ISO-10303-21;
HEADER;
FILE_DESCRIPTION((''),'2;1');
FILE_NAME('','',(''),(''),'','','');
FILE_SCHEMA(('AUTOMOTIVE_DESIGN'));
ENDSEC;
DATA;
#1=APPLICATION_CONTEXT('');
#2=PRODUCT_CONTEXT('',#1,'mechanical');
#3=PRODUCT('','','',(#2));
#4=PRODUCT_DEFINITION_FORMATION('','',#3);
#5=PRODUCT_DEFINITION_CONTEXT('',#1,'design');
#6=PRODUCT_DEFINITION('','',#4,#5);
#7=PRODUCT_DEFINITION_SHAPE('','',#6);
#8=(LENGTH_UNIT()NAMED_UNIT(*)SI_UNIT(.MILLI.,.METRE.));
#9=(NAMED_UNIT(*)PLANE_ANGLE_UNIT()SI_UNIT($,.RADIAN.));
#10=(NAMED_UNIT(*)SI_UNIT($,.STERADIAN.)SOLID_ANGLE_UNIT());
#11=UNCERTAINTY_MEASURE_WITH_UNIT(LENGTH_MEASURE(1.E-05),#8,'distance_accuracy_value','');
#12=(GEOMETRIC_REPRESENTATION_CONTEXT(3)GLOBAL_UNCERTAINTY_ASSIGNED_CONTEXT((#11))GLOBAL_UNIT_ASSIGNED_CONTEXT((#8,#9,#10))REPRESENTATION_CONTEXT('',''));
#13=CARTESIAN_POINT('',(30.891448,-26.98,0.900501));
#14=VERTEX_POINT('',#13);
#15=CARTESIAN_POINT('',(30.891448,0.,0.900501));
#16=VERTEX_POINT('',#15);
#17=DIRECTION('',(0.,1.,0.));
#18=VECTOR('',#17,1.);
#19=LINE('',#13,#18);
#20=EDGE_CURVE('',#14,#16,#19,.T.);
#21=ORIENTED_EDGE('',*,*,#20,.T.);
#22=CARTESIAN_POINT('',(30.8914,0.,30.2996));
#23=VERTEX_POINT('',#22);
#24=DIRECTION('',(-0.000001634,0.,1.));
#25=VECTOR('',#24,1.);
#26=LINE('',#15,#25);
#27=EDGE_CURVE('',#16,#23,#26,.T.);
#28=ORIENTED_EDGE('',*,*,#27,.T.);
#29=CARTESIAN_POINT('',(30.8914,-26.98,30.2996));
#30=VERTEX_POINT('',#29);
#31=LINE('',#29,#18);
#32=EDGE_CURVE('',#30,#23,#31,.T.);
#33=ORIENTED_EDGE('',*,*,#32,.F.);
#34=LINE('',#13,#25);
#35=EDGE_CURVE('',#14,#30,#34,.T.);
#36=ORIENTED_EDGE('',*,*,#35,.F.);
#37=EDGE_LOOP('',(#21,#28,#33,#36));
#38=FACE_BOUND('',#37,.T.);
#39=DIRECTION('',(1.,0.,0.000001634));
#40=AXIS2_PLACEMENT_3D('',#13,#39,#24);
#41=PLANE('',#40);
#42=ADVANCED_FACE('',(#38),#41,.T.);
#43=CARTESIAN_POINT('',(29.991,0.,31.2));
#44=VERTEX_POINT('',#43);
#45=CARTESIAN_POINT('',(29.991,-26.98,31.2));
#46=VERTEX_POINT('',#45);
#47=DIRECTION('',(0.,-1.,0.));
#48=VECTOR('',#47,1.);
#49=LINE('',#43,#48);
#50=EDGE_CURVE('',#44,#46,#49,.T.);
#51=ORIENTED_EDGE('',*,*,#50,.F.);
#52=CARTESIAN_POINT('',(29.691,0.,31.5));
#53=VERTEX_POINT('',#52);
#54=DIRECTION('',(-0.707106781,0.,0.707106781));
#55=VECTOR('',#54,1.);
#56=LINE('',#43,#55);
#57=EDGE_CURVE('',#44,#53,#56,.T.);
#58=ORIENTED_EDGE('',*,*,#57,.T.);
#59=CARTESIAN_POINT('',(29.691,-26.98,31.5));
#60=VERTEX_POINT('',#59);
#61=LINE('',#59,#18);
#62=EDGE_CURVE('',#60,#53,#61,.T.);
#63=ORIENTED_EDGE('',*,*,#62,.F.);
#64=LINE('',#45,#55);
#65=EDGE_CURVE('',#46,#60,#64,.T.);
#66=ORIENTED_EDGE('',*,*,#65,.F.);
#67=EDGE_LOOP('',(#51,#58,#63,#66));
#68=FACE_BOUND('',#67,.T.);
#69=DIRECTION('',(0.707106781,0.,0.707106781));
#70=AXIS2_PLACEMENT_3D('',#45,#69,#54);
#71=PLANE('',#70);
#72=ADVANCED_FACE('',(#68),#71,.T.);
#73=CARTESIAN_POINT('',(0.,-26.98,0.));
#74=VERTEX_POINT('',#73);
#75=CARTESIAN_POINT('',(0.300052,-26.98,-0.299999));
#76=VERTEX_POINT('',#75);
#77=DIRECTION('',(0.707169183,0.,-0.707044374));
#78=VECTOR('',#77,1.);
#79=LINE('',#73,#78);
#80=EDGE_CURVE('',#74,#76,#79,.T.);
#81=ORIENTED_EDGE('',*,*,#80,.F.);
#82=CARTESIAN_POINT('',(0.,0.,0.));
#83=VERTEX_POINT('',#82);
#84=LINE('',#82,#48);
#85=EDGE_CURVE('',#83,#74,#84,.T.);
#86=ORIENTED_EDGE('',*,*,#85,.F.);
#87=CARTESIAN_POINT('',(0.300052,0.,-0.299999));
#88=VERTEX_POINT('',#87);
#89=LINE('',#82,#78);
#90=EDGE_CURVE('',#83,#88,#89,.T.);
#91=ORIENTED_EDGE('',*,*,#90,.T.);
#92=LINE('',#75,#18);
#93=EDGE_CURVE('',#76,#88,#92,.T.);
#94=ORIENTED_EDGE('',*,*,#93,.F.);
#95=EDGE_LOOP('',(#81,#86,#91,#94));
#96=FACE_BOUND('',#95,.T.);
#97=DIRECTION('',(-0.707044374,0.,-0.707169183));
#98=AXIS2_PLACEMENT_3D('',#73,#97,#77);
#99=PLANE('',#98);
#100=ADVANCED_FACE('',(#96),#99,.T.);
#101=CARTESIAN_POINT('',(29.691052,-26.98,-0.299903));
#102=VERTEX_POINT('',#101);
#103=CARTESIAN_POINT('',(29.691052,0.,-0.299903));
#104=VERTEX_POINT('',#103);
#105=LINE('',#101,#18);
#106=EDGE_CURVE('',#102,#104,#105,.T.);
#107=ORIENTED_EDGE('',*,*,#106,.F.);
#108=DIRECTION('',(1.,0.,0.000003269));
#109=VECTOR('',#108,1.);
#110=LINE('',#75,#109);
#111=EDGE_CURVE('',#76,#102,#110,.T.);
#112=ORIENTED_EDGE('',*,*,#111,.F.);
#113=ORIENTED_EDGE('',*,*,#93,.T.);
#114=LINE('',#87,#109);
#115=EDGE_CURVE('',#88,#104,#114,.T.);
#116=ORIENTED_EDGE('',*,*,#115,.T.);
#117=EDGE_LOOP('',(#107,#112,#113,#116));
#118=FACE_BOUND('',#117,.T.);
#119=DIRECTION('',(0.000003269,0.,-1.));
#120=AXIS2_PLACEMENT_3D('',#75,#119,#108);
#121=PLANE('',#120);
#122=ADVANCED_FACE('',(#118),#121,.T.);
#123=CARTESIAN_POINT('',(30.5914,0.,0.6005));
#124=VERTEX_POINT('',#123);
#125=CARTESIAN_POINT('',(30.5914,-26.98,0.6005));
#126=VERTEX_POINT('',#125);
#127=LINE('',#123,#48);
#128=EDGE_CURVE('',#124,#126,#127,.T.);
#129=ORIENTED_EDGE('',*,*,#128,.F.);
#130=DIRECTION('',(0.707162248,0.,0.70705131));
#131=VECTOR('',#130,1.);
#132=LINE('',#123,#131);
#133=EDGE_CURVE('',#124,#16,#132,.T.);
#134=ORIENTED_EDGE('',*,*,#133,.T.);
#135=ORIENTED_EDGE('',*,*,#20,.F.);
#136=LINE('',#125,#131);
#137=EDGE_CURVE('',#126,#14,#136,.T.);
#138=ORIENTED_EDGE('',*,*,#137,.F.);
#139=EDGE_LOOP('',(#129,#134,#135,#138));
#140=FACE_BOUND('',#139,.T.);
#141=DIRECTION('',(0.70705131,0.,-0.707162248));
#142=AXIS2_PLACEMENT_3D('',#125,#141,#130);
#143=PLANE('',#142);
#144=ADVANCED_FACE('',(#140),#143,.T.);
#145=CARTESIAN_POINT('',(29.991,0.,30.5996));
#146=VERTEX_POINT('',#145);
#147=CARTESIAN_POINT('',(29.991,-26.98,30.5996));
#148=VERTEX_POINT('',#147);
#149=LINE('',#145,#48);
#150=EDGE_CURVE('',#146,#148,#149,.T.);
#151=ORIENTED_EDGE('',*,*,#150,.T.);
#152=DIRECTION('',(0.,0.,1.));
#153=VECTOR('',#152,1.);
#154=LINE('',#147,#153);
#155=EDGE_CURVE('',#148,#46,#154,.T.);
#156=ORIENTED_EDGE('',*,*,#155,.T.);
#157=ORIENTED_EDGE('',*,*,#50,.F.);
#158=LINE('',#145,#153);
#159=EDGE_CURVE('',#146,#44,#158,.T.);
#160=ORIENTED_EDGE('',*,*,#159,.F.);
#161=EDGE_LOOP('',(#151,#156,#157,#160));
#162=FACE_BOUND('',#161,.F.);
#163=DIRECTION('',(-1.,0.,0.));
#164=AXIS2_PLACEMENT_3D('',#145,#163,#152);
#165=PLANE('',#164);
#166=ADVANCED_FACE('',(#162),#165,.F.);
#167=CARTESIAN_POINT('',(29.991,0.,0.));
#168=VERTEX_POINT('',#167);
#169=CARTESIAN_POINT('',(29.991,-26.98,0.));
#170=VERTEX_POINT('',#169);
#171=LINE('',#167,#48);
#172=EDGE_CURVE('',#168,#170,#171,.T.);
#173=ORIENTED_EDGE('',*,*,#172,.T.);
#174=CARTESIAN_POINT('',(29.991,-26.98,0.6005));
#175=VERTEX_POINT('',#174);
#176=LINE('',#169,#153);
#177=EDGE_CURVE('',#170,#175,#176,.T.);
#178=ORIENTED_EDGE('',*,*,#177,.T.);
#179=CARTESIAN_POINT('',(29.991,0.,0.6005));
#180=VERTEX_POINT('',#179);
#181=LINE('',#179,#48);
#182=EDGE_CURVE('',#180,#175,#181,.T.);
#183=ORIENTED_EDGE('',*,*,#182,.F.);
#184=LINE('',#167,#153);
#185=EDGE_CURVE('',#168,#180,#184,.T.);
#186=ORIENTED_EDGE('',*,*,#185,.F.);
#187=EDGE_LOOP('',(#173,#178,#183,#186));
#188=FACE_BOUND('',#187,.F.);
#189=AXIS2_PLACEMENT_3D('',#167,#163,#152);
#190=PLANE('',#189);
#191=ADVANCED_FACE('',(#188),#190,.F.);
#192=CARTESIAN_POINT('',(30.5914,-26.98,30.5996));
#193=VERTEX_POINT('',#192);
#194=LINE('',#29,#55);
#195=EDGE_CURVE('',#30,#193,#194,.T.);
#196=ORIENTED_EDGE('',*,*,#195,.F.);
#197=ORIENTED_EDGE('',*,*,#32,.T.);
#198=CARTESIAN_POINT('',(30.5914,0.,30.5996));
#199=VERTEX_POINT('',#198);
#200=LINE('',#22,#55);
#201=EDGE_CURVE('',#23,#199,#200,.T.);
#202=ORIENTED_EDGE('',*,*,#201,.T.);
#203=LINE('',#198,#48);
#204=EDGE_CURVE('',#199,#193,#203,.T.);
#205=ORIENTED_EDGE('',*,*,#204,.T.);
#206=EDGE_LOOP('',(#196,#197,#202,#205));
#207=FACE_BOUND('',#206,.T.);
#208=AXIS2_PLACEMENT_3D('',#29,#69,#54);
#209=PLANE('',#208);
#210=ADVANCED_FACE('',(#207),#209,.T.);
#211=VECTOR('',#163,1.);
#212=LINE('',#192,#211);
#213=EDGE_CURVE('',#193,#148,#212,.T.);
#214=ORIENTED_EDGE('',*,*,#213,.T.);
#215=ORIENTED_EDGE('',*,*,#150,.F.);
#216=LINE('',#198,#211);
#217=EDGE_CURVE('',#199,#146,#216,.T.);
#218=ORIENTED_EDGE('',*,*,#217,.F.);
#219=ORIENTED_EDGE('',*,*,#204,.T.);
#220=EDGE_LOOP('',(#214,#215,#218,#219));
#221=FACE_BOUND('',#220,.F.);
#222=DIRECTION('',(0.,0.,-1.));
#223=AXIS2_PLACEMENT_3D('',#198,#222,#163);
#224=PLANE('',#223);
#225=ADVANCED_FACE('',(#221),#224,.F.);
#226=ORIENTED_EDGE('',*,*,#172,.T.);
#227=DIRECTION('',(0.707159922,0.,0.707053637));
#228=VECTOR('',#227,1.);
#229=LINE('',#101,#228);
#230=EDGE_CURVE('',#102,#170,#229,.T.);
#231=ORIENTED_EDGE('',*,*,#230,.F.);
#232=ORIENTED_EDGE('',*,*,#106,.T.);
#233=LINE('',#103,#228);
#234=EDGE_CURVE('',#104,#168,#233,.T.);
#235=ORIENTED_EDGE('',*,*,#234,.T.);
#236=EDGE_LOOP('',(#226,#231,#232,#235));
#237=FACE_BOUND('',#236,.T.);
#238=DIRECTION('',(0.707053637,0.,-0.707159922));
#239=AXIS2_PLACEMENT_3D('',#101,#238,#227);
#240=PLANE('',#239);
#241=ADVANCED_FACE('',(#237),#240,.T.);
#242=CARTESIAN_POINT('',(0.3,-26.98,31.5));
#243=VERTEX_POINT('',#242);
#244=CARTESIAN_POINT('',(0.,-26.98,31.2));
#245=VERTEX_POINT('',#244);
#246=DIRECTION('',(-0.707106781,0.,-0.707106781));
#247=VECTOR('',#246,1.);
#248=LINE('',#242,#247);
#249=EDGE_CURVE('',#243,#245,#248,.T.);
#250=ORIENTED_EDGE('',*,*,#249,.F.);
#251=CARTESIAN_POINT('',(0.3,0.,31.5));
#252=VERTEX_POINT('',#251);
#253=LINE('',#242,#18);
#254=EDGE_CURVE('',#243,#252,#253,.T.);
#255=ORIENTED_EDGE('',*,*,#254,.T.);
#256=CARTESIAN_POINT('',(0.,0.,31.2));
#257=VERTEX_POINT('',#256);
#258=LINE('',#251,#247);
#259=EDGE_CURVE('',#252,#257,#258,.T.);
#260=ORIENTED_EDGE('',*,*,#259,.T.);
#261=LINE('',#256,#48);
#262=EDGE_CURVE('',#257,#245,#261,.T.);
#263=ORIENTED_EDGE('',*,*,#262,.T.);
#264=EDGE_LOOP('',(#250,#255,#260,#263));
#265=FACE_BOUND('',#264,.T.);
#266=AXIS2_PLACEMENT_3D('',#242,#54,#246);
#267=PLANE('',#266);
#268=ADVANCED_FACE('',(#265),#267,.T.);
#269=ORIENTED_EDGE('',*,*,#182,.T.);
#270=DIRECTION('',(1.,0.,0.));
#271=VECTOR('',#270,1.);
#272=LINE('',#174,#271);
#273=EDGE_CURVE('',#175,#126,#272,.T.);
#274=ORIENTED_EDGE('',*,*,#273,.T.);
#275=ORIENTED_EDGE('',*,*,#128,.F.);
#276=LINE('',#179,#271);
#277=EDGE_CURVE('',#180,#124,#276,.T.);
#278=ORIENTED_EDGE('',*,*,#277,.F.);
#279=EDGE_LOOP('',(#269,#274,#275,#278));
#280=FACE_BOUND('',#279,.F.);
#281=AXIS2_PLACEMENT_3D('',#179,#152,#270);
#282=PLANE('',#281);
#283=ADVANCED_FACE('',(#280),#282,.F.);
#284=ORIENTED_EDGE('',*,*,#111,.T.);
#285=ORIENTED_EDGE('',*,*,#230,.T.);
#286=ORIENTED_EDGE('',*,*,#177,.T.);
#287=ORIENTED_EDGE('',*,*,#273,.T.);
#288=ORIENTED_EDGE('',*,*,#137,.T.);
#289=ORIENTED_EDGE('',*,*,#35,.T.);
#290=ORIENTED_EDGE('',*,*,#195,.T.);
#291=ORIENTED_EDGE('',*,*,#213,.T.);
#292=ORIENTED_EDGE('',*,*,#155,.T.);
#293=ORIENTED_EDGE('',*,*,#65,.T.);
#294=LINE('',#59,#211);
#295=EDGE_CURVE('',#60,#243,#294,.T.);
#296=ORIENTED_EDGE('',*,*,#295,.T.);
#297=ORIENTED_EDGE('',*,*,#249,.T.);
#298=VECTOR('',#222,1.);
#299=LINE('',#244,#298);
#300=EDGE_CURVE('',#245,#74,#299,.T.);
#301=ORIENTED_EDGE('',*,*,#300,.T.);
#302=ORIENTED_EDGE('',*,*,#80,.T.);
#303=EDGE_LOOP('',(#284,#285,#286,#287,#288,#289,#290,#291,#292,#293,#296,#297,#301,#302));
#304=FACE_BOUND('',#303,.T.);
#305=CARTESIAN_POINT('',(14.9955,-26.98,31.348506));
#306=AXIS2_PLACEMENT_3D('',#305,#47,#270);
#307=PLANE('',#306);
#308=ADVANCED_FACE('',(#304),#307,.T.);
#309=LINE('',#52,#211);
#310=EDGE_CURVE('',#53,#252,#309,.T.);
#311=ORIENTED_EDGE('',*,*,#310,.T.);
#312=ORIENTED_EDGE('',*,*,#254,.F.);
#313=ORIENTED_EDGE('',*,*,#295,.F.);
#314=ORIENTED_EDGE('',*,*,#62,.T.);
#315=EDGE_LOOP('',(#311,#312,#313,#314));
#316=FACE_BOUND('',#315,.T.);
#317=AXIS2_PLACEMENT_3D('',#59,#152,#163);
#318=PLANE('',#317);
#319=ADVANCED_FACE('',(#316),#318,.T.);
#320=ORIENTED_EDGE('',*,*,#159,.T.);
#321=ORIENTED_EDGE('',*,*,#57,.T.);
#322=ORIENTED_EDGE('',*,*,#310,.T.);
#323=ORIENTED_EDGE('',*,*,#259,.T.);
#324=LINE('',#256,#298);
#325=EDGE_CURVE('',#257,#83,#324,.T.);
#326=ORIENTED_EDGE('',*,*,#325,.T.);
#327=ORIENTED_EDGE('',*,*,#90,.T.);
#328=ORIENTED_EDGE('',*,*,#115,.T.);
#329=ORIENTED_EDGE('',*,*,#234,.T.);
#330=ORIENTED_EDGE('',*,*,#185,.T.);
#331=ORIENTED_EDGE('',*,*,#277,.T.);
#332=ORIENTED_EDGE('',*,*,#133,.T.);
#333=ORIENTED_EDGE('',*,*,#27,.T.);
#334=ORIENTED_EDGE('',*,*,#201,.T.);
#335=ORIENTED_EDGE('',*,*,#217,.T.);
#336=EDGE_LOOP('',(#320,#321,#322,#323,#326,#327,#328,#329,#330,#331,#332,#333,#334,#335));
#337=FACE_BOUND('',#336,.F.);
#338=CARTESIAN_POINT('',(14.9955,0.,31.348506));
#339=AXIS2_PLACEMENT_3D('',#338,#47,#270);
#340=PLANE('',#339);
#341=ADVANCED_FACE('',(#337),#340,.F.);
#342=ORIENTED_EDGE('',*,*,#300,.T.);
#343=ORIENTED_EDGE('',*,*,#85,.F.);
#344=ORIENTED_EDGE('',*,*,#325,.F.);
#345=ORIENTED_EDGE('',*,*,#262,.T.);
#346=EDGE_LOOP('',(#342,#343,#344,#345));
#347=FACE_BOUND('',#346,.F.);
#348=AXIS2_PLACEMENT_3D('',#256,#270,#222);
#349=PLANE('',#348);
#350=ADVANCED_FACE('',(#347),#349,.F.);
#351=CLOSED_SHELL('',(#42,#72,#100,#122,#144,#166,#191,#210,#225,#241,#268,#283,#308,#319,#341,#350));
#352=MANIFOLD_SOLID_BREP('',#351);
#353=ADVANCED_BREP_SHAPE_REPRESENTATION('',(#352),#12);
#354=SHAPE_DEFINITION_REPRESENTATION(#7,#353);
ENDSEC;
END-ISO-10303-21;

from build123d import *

# Parameters (mm, degrees)
F1_DEPTH = 26.98
F3_DEPTH = 26.98


# Not quite as in the source:
# - ends of sketch curves that miss each other by under 0.0002 mm in the source are joined


with BuildPart() as f1:
    # F0 (on Front) → F1 (new body)
    with BuildSketch(Plane.XZ):
        Polygon((0, 31.2), (0, 0), (29.991, 0), (29.991, 0.6005), (30.5914, 0.6005), (30.5914, 30.5996), (29.991, 30.5996), (29.991, 31.2), align=None)
    extrude(amount=F1_DEPTH)

    # F2 (on face) → F3 (join, through all)
    with BuildSketch(Plane.XZ.offset(26.98)):
        Polygon((0.3, 31.5), (0, 31.2), (29.991, 31.2), (29.691, 31.5), align=None)
        Polygon((30.8914, 30.2996), (30.5914, 30.5996), (30.5914, 0.6005), (30.8914480512, 0.9005009807), align=None)
        Polygon((29.991, 0), (0, 0), (0.3000519754, -0.2999990192), (29.6910519752, -0.2999029432), align=None)
    extrude(amount=-F3_DEPTH)


solid = f1.part
